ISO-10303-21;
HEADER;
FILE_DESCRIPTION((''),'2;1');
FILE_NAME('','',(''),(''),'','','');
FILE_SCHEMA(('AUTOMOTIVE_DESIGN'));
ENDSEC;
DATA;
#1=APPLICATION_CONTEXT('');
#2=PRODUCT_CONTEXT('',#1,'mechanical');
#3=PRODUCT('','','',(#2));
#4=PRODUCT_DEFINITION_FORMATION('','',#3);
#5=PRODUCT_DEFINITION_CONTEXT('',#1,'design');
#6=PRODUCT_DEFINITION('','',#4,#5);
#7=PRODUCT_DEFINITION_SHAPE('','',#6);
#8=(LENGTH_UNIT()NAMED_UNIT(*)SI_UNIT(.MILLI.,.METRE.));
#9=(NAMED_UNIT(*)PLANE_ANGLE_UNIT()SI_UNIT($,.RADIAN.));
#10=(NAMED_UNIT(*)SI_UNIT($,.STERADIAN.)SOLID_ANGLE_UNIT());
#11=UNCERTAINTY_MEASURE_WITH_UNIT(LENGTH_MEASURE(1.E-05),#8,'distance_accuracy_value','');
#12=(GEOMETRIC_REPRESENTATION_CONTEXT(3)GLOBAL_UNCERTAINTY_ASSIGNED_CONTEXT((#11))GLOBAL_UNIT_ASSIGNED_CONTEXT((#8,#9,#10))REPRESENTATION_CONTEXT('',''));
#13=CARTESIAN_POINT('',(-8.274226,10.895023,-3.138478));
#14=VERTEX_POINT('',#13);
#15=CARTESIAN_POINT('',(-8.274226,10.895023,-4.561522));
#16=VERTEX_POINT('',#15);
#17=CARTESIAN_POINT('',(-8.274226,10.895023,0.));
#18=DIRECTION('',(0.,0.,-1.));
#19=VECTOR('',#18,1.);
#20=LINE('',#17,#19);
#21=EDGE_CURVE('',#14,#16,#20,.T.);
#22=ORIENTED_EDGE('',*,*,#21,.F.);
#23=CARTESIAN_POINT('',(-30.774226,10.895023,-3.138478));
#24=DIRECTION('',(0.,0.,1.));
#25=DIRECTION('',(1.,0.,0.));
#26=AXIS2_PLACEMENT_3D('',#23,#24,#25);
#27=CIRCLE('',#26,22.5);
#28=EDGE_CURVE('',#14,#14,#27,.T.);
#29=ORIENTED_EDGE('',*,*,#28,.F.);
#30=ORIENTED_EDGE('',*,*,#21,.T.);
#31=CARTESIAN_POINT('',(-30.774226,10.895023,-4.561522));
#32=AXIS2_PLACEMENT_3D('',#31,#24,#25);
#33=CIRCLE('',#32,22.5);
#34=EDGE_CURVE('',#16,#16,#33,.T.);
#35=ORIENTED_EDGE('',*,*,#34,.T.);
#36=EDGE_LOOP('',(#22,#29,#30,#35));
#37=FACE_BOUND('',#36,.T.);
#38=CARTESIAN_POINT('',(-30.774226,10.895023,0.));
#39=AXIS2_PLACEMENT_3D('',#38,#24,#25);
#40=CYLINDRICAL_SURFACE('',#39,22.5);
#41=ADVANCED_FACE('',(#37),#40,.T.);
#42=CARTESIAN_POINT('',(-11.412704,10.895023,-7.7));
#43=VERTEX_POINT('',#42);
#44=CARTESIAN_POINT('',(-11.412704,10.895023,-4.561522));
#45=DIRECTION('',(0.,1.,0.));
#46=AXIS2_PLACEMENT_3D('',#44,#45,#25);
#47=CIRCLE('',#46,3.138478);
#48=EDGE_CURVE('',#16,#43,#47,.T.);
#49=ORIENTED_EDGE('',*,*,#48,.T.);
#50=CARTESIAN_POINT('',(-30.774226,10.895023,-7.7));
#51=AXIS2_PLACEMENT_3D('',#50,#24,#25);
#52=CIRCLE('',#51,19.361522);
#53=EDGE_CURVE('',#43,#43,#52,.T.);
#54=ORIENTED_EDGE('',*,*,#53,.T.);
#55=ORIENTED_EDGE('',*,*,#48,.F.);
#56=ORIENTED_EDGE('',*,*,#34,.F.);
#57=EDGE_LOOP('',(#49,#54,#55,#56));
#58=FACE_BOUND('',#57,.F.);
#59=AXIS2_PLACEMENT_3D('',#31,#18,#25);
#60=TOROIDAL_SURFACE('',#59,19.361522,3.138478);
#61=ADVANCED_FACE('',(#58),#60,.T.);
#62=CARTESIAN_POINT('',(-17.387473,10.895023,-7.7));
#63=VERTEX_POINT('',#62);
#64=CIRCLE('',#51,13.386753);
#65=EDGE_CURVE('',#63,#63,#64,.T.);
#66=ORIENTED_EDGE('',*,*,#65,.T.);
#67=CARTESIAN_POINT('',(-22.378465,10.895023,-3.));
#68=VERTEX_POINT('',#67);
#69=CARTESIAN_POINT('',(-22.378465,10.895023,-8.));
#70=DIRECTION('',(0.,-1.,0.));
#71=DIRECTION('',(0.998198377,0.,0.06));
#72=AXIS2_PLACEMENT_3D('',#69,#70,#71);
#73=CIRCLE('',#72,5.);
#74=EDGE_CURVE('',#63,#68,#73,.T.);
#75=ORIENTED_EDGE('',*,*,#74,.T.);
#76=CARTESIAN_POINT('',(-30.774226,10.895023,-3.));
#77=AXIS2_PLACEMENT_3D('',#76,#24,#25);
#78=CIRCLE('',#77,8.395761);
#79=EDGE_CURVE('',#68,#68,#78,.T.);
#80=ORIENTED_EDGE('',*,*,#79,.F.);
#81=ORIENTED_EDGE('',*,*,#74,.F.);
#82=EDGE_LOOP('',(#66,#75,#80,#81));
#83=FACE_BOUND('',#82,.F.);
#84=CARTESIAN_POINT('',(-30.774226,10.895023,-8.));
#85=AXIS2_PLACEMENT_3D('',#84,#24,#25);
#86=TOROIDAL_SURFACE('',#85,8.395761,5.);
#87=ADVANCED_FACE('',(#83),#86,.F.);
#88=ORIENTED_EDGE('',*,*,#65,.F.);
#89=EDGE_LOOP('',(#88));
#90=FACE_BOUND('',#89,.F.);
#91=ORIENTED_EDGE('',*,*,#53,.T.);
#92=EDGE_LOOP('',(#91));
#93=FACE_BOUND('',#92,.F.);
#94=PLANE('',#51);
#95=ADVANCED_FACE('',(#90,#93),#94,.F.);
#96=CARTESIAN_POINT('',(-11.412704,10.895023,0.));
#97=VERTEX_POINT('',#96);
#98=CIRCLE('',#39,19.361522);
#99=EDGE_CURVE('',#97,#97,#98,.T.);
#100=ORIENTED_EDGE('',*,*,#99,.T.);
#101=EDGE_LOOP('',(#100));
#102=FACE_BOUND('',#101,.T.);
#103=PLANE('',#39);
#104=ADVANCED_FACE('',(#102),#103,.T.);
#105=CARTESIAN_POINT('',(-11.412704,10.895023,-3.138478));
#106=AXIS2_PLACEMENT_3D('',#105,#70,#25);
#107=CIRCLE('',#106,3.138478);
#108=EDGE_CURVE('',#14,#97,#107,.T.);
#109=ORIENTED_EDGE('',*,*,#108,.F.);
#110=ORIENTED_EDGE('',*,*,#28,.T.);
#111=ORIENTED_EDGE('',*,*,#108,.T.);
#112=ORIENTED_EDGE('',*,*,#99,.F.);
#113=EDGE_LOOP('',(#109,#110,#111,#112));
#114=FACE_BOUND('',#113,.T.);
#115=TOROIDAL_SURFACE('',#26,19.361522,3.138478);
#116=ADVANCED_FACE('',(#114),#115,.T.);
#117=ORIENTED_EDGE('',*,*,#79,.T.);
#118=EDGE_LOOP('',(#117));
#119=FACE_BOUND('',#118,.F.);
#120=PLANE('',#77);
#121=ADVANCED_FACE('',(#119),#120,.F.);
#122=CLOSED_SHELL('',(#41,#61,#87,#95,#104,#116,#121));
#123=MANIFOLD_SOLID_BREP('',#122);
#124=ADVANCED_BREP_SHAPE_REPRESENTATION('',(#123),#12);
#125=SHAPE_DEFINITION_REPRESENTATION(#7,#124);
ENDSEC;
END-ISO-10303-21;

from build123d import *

# Parameters (mm, degrees)
F0_R     = 22.5
F0_R_2   = 13.3867529453
F1_DEPTH = 7.7
F2_R     = 3.1384776311
F3_DEPTH = 3


# Not quite as in the source:
# - a fillet or chamfer that OpenCascade refuses, or shapes differently, is made with other operations: its cross-section is extruded or revolved along the edge and cut away or added


with BuildPart() as f1:
    # F0 (on Top) → F1 (new body)
    with BuildSketch(Plane.XY):
        with Locations((-30.7742264122, 10.8950231224)):
            Circle(F0_R)
        with Locations((-30.7742264122, 10.8950231224)):
            Circle(F0_R_2, mode=Mode.SUBTRACT)
    extrude(amount=-F1_DEPTH)

    # F2
    f2_edges = [f1.edges().sort_by_distance(p)[0] for p in [
        (-8.274226, 10.895023, -3.85),
        (-53.274226, 10.895023, 0),
        (-53.274226, 10.895023, -7.7),
    ]]
    fillet(f2_edges, radius=F2_R)

    # F0 (on Top) → F3 (join)
    with BuildSketch(Plane.XY):
        with Locations((-30.7742264122, 10.8950231224)):
            Circle(F0_R_2)
    extrude(amount=-F3_DEPTH)

    # F4: fillet of radius 5 on 1 edges, made by hand

    # F4_s1 → F4_t2 (revolve)
    with BuildSketch(Plane.XZ.offset(-10.8950231224)):
        with BuildLine():
            ThreePointArc((-17.3874734669, -7.7), (-18.9506380521, -4.3599450554), (-22.3784653523, -3))
            Line((-22.3784653523, -3), (-17.3874734669, -3))
            Line((-17.3874734669, -3), (-17.3874734669, -7.7))
        make_face()
    revolve(axis=Axis((-30.7742264122, 10.8950231224, -3), (0, 0, 1)))


solid = f1.part
